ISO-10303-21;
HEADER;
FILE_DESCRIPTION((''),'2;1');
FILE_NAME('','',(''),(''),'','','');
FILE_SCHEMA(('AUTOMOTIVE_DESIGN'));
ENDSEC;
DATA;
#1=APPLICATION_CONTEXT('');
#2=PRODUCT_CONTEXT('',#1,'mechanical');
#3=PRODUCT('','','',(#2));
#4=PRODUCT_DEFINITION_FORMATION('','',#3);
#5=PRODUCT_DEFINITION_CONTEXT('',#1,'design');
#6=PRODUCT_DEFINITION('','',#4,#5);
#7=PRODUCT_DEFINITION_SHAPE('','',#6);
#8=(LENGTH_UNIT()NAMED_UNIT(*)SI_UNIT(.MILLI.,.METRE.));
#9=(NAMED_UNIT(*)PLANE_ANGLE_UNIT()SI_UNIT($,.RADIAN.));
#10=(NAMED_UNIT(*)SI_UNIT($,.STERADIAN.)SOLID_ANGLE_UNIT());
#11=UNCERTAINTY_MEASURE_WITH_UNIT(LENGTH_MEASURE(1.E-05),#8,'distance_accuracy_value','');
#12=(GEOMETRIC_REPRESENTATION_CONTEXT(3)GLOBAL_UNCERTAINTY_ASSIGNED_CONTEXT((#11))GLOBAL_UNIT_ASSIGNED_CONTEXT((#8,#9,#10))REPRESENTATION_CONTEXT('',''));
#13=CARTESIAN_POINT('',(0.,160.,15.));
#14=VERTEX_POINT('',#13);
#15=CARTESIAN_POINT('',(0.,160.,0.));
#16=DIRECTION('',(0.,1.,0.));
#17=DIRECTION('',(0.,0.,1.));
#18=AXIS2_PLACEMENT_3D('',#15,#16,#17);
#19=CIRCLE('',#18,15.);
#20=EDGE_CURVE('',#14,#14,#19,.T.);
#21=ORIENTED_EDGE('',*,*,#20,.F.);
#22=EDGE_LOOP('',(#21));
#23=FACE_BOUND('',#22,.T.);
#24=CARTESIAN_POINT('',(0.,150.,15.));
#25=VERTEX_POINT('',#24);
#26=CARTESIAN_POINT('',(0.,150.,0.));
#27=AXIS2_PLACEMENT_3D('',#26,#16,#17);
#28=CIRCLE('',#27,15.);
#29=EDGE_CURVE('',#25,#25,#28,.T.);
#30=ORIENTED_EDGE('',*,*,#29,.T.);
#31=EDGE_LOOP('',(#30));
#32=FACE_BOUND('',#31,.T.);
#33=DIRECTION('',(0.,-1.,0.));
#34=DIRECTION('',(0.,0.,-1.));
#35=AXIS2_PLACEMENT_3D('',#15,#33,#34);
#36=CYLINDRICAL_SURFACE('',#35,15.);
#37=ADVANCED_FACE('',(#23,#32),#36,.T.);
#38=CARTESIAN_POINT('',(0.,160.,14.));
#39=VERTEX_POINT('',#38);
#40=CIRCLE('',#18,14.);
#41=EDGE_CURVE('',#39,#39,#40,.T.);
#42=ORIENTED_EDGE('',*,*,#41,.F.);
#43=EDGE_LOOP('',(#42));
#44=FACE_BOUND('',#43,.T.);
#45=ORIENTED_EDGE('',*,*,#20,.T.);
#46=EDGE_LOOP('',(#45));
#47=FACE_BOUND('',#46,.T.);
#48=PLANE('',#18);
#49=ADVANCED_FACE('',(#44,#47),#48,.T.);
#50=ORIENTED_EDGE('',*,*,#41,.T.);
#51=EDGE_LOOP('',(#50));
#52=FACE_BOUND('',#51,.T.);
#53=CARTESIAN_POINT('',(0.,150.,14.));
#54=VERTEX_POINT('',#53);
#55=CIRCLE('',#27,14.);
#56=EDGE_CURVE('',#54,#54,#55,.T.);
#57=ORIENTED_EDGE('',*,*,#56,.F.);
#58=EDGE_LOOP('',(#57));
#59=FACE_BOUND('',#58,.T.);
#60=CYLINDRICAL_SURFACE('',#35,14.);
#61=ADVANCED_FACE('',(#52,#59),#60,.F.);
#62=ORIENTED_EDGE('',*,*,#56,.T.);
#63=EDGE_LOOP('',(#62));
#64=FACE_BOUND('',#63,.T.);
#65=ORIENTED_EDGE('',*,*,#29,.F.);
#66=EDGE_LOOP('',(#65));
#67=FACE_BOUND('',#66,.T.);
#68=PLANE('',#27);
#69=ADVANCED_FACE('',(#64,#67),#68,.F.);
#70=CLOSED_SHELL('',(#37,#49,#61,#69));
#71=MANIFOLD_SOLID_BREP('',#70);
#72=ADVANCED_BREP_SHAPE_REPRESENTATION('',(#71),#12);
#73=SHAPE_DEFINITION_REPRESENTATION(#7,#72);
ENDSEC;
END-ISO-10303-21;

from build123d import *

# Parameters (mm, degrees)
BOSS_EXTRUDE1_OUTLINE_R   = 15
BOSS_EXTRUDE1_OUTLINE_R_2 = 14
BOSS_EXTRUDE1_DEPTH       = 10


# Read off the part's stored shape, not the designer's step: Boss-Extrude1
with BuildPart() as part:
    # Boss-Extrude1 outline → Boss-Extrude1 (new body)
    with BuildSketch(Plane(origin=(0, 150, 0), x_dir=(1, 0, 0), z_dir=(0, 1, 0))):
        Circle(BOSS_EXTRUDE1_OUTLINE_R)
        Circle(BOSS_EXTRUDE1_OUTLINE_R_2, mode=Mode.SUBTRACT)
    extrude(amount=BOSS_EXTRUDE1_DEPTH)


solid = part.part
